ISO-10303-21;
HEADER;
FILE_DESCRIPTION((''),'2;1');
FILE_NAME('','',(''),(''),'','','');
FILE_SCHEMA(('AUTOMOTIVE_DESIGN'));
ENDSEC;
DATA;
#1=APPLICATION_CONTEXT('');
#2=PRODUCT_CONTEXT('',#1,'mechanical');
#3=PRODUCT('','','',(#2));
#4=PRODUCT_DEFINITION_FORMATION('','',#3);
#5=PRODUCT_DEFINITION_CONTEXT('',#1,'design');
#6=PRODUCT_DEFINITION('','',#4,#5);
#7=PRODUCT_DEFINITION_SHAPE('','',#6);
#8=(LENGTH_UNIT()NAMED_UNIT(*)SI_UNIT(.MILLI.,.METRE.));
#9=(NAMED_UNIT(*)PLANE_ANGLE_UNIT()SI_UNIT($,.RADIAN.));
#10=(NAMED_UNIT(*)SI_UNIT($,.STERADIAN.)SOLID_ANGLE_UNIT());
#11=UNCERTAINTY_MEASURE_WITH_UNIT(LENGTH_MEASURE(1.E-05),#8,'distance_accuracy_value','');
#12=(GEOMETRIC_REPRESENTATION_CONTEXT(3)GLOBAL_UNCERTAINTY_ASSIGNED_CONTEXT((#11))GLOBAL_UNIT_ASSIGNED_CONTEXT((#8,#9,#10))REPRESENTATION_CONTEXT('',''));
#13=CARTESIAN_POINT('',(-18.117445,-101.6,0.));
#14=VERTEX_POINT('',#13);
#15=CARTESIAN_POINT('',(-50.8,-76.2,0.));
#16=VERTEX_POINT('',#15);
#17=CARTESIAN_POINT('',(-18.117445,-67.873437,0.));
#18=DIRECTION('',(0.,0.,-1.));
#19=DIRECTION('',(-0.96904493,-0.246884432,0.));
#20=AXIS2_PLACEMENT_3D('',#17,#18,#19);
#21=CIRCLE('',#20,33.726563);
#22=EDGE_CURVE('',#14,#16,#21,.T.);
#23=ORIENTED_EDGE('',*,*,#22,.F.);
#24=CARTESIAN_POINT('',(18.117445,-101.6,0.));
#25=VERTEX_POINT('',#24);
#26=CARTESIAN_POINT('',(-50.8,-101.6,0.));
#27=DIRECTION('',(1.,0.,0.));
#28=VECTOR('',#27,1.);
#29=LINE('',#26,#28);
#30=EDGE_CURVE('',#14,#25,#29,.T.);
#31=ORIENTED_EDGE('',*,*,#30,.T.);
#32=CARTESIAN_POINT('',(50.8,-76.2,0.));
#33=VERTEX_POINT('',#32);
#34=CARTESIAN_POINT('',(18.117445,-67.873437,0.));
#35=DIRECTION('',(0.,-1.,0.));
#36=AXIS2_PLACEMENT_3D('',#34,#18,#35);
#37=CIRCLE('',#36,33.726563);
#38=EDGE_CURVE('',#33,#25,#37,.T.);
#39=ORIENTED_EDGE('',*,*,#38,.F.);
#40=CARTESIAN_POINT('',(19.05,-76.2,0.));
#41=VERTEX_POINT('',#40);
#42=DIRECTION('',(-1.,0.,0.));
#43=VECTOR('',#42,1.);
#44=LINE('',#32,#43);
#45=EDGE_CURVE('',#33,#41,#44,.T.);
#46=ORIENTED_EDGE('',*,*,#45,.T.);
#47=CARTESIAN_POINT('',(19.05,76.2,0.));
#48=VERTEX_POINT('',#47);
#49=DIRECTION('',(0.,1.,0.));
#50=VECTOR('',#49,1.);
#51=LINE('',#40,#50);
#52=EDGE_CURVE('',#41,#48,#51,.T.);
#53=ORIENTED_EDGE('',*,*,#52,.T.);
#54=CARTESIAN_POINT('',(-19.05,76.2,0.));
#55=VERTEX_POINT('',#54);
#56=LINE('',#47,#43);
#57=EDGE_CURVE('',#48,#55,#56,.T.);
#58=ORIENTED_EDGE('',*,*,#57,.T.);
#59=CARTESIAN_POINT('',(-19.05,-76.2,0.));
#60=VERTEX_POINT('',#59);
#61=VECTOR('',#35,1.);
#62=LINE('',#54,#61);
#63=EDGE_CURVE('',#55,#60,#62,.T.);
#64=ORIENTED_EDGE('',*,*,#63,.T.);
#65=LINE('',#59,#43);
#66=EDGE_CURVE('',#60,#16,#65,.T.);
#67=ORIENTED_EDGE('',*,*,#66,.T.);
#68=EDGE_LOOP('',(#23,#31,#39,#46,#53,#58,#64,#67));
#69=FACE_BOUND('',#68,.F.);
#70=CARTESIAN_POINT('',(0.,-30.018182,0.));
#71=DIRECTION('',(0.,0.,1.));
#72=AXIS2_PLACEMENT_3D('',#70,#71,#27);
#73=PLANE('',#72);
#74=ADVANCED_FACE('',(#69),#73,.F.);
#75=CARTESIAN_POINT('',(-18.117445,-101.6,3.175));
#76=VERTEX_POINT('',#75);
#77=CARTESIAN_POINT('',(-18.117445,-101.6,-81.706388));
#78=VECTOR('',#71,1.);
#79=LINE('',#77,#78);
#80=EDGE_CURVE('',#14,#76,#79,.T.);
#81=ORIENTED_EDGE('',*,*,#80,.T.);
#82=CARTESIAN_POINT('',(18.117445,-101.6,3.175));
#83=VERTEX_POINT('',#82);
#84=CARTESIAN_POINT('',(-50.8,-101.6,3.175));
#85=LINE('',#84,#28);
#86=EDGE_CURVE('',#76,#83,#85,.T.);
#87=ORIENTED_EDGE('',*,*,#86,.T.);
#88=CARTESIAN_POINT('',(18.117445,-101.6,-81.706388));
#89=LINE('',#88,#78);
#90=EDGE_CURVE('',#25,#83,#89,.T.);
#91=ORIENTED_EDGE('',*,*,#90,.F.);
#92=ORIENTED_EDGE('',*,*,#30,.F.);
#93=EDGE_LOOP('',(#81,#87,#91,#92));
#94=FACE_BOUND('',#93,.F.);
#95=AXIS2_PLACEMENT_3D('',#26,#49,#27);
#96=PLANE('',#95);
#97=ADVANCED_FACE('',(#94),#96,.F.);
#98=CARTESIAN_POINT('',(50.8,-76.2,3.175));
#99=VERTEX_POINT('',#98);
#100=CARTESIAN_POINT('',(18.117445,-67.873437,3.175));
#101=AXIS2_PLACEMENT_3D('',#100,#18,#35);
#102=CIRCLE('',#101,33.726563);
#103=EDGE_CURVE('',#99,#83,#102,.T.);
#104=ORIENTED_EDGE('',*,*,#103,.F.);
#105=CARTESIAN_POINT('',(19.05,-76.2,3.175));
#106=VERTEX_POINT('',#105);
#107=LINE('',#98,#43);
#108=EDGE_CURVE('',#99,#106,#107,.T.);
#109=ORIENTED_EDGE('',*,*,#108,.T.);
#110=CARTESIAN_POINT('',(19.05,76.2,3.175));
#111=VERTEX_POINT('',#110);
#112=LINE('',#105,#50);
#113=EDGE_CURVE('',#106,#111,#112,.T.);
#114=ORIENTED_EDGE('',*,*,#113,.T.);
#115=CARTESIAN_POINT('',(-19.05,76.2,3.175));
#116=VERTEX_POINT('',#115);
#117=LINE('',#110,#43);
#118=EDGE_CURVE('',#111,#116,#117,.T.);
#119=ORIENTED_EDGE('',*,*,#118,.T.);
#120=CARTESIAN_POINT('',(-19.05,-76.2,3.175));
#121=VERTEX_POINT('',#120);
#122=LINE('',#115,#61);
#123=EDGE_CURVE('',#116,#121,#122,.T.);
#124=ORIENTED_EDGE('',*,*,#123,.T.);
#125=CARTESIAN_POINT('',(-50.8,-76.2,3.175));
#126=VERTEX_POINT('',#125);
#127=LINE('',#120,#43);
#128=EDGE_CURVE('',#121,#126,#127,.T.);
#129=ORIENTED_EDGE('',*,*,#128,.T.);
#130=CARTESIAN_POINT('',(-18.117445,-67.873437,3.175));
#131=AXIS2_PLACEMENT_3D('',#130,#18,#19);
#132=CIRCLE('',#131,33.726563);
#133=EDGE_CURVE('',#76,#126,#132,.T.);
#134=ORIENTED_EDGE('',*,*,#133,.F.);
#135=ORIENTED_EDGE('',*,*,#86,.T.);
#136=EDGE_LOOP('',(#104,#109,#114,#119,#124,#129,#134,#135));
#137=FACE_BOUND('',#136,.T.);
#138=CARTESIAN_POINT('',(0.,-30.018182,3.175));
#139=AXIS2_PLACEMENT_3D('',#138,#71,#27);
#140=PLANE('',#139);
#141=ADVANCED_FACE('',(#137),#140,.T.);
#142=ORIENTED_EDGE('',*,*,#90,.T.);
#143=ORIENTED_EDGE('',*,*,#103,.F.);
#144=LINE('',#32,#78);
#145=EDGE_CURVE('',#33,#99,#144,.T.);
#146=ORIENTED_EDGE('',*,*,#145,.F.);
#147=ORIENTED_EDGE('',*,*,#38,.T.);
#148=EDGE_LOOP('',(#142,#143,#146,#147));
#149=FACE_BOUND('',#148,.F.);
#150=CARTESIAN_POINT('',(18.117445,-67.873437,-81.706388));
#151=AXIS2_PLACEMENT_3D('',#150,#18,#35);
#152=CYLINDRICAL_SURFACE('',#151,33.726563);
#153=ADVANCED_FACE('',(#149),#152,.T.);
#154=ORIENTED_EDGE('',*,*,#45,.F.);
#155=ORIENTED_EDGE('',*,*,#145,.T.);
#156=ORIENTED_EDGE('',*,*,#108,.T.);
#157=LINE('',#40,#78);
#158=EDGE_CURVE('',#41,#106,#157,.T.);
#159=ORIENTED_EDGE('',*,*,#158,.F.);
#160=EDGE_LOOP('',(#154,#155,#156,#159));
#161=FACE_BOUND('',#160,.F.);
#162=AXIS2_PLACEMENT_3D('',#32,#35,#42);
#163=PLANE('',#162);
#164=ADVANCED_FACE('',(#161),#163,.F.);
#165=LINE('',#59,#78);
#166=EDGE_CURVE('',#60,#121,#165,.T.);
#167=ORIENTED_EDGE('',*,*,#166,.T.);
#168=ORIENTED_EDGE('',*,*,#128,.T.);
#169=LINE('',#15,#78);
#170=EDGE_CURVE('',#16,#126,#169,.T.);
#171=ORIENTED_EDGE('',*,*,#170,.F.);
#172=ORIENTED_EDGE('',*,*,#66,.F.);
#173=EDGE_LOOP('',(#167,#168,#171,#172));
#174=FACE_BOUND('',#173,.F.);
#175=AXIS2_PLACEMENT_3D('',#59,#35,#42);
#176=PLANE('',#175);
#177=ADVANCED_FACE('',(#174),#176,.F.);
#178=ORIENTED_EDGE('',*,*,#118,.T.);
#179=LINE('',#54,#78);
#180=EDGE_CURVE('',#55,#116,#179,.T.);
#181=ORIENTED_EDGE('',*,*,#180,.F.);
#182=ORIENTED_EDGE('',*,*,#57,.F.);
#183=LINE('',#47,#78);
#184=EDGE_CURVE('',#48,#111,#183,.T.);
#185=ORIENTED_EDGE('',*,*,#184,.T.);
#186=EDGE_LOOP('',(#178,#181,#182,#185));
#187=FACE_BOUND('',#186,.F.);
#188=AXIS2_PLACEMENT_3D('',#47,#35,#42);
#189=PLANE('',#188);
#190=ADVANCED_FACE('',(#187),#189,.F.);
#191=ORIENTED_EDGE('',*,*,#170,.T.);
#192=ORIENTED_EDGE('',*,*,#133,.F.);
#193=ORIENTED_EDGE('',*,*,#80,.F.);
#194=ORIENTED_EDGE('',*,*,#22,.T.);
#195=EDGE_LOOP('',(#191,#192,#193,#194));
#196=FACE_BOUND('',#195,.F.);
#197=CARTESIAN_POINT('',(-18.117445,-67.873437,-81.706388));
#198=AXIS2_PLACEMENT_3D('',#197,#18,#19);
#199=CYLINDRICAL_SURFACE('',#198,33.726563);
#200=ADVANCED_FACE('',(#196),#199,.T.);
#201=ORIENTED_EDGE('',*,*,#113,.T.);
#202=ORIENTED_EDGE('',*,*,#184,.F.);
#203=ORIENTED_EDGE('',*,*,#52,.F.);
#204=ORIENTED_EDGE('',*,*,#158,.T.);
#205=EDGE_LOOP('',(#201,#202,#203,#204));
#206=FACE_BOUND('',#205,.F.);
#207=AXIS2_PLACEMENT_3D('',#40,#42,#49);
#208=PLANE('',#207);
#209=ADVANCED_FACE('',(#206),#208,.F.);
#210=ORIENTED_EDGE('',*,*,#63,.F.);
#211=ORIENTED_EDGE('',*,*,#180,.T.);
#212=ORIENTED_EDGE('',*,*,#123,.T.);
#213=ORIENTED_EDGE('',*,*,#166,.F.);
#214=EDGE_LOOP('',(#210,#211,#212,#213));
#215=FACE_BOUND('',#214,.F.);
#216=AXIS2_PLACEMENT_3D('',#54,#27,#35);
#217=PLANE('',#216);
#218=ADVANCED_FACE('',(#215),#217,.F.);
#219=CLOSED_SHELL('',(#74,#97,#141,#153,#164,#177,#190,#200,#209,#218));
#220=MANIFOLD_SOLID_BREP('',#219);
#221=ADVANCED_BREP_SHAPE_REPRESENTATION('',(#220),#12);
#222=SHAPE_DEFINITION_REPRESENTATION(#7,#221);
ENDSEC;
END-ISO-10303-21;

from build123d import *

# Parameters (mm, degrees)
F1_DEPTH    = 3.175
F2_T1_DEPTH = 166.5877767412


# Not quite as in the source:
# - a fillet or chamfer that OpenCascade refuses, or shapes differently, is made with other operations: its cross-section is extruded or revolved along the edge and cut away or added


with BuildPart() as f1:
    # F0 (on Top) → F1 (new body)
    with BuildSketch(Plane.XY):
        Polygon((19.05, -76.2), (19.05, 76.2), (-19.05, 76.2), (-19.05, -76.2), (-50.8, -76.2), (-50.8, -101.6), (50.8, -101.6), (50.8, -76.2), align=None)
    extrude(amount=F1_DEPTH)

    # F2: fillet of radius 33.7265634664 on 2 edges, made by hand

    # F2_s2 → F2_t1 (cut)
    with BuildSketch(Plane.XY.offset(-81.7063883706)):
        with BuildLine():
            ThreePointArc((-50.8, -76.2), (-38.8135156804, -94.5033769622), (-18.1174446518, -101.6))
            Line((-18.1174446518, -101.6), (-50.8, -101.6))
            Line((-50.8, -101.6), (-50.8, -76.2))
        make_face()
        with BuildLine():
            ThreePointArc((18.1174446518, -101.6), (38.8135156804, -94.5033769622), (50.8, -76.2))
            Line((50.8, -76.2), (50.8, -101.6))
            Line((50.8, -101.6), (18.1174446518, -101.6))
        make_face()
    extrude(amount=F2_T1_DEPTH, mode=Mode.SUBTRACT)


solid = f1.part
